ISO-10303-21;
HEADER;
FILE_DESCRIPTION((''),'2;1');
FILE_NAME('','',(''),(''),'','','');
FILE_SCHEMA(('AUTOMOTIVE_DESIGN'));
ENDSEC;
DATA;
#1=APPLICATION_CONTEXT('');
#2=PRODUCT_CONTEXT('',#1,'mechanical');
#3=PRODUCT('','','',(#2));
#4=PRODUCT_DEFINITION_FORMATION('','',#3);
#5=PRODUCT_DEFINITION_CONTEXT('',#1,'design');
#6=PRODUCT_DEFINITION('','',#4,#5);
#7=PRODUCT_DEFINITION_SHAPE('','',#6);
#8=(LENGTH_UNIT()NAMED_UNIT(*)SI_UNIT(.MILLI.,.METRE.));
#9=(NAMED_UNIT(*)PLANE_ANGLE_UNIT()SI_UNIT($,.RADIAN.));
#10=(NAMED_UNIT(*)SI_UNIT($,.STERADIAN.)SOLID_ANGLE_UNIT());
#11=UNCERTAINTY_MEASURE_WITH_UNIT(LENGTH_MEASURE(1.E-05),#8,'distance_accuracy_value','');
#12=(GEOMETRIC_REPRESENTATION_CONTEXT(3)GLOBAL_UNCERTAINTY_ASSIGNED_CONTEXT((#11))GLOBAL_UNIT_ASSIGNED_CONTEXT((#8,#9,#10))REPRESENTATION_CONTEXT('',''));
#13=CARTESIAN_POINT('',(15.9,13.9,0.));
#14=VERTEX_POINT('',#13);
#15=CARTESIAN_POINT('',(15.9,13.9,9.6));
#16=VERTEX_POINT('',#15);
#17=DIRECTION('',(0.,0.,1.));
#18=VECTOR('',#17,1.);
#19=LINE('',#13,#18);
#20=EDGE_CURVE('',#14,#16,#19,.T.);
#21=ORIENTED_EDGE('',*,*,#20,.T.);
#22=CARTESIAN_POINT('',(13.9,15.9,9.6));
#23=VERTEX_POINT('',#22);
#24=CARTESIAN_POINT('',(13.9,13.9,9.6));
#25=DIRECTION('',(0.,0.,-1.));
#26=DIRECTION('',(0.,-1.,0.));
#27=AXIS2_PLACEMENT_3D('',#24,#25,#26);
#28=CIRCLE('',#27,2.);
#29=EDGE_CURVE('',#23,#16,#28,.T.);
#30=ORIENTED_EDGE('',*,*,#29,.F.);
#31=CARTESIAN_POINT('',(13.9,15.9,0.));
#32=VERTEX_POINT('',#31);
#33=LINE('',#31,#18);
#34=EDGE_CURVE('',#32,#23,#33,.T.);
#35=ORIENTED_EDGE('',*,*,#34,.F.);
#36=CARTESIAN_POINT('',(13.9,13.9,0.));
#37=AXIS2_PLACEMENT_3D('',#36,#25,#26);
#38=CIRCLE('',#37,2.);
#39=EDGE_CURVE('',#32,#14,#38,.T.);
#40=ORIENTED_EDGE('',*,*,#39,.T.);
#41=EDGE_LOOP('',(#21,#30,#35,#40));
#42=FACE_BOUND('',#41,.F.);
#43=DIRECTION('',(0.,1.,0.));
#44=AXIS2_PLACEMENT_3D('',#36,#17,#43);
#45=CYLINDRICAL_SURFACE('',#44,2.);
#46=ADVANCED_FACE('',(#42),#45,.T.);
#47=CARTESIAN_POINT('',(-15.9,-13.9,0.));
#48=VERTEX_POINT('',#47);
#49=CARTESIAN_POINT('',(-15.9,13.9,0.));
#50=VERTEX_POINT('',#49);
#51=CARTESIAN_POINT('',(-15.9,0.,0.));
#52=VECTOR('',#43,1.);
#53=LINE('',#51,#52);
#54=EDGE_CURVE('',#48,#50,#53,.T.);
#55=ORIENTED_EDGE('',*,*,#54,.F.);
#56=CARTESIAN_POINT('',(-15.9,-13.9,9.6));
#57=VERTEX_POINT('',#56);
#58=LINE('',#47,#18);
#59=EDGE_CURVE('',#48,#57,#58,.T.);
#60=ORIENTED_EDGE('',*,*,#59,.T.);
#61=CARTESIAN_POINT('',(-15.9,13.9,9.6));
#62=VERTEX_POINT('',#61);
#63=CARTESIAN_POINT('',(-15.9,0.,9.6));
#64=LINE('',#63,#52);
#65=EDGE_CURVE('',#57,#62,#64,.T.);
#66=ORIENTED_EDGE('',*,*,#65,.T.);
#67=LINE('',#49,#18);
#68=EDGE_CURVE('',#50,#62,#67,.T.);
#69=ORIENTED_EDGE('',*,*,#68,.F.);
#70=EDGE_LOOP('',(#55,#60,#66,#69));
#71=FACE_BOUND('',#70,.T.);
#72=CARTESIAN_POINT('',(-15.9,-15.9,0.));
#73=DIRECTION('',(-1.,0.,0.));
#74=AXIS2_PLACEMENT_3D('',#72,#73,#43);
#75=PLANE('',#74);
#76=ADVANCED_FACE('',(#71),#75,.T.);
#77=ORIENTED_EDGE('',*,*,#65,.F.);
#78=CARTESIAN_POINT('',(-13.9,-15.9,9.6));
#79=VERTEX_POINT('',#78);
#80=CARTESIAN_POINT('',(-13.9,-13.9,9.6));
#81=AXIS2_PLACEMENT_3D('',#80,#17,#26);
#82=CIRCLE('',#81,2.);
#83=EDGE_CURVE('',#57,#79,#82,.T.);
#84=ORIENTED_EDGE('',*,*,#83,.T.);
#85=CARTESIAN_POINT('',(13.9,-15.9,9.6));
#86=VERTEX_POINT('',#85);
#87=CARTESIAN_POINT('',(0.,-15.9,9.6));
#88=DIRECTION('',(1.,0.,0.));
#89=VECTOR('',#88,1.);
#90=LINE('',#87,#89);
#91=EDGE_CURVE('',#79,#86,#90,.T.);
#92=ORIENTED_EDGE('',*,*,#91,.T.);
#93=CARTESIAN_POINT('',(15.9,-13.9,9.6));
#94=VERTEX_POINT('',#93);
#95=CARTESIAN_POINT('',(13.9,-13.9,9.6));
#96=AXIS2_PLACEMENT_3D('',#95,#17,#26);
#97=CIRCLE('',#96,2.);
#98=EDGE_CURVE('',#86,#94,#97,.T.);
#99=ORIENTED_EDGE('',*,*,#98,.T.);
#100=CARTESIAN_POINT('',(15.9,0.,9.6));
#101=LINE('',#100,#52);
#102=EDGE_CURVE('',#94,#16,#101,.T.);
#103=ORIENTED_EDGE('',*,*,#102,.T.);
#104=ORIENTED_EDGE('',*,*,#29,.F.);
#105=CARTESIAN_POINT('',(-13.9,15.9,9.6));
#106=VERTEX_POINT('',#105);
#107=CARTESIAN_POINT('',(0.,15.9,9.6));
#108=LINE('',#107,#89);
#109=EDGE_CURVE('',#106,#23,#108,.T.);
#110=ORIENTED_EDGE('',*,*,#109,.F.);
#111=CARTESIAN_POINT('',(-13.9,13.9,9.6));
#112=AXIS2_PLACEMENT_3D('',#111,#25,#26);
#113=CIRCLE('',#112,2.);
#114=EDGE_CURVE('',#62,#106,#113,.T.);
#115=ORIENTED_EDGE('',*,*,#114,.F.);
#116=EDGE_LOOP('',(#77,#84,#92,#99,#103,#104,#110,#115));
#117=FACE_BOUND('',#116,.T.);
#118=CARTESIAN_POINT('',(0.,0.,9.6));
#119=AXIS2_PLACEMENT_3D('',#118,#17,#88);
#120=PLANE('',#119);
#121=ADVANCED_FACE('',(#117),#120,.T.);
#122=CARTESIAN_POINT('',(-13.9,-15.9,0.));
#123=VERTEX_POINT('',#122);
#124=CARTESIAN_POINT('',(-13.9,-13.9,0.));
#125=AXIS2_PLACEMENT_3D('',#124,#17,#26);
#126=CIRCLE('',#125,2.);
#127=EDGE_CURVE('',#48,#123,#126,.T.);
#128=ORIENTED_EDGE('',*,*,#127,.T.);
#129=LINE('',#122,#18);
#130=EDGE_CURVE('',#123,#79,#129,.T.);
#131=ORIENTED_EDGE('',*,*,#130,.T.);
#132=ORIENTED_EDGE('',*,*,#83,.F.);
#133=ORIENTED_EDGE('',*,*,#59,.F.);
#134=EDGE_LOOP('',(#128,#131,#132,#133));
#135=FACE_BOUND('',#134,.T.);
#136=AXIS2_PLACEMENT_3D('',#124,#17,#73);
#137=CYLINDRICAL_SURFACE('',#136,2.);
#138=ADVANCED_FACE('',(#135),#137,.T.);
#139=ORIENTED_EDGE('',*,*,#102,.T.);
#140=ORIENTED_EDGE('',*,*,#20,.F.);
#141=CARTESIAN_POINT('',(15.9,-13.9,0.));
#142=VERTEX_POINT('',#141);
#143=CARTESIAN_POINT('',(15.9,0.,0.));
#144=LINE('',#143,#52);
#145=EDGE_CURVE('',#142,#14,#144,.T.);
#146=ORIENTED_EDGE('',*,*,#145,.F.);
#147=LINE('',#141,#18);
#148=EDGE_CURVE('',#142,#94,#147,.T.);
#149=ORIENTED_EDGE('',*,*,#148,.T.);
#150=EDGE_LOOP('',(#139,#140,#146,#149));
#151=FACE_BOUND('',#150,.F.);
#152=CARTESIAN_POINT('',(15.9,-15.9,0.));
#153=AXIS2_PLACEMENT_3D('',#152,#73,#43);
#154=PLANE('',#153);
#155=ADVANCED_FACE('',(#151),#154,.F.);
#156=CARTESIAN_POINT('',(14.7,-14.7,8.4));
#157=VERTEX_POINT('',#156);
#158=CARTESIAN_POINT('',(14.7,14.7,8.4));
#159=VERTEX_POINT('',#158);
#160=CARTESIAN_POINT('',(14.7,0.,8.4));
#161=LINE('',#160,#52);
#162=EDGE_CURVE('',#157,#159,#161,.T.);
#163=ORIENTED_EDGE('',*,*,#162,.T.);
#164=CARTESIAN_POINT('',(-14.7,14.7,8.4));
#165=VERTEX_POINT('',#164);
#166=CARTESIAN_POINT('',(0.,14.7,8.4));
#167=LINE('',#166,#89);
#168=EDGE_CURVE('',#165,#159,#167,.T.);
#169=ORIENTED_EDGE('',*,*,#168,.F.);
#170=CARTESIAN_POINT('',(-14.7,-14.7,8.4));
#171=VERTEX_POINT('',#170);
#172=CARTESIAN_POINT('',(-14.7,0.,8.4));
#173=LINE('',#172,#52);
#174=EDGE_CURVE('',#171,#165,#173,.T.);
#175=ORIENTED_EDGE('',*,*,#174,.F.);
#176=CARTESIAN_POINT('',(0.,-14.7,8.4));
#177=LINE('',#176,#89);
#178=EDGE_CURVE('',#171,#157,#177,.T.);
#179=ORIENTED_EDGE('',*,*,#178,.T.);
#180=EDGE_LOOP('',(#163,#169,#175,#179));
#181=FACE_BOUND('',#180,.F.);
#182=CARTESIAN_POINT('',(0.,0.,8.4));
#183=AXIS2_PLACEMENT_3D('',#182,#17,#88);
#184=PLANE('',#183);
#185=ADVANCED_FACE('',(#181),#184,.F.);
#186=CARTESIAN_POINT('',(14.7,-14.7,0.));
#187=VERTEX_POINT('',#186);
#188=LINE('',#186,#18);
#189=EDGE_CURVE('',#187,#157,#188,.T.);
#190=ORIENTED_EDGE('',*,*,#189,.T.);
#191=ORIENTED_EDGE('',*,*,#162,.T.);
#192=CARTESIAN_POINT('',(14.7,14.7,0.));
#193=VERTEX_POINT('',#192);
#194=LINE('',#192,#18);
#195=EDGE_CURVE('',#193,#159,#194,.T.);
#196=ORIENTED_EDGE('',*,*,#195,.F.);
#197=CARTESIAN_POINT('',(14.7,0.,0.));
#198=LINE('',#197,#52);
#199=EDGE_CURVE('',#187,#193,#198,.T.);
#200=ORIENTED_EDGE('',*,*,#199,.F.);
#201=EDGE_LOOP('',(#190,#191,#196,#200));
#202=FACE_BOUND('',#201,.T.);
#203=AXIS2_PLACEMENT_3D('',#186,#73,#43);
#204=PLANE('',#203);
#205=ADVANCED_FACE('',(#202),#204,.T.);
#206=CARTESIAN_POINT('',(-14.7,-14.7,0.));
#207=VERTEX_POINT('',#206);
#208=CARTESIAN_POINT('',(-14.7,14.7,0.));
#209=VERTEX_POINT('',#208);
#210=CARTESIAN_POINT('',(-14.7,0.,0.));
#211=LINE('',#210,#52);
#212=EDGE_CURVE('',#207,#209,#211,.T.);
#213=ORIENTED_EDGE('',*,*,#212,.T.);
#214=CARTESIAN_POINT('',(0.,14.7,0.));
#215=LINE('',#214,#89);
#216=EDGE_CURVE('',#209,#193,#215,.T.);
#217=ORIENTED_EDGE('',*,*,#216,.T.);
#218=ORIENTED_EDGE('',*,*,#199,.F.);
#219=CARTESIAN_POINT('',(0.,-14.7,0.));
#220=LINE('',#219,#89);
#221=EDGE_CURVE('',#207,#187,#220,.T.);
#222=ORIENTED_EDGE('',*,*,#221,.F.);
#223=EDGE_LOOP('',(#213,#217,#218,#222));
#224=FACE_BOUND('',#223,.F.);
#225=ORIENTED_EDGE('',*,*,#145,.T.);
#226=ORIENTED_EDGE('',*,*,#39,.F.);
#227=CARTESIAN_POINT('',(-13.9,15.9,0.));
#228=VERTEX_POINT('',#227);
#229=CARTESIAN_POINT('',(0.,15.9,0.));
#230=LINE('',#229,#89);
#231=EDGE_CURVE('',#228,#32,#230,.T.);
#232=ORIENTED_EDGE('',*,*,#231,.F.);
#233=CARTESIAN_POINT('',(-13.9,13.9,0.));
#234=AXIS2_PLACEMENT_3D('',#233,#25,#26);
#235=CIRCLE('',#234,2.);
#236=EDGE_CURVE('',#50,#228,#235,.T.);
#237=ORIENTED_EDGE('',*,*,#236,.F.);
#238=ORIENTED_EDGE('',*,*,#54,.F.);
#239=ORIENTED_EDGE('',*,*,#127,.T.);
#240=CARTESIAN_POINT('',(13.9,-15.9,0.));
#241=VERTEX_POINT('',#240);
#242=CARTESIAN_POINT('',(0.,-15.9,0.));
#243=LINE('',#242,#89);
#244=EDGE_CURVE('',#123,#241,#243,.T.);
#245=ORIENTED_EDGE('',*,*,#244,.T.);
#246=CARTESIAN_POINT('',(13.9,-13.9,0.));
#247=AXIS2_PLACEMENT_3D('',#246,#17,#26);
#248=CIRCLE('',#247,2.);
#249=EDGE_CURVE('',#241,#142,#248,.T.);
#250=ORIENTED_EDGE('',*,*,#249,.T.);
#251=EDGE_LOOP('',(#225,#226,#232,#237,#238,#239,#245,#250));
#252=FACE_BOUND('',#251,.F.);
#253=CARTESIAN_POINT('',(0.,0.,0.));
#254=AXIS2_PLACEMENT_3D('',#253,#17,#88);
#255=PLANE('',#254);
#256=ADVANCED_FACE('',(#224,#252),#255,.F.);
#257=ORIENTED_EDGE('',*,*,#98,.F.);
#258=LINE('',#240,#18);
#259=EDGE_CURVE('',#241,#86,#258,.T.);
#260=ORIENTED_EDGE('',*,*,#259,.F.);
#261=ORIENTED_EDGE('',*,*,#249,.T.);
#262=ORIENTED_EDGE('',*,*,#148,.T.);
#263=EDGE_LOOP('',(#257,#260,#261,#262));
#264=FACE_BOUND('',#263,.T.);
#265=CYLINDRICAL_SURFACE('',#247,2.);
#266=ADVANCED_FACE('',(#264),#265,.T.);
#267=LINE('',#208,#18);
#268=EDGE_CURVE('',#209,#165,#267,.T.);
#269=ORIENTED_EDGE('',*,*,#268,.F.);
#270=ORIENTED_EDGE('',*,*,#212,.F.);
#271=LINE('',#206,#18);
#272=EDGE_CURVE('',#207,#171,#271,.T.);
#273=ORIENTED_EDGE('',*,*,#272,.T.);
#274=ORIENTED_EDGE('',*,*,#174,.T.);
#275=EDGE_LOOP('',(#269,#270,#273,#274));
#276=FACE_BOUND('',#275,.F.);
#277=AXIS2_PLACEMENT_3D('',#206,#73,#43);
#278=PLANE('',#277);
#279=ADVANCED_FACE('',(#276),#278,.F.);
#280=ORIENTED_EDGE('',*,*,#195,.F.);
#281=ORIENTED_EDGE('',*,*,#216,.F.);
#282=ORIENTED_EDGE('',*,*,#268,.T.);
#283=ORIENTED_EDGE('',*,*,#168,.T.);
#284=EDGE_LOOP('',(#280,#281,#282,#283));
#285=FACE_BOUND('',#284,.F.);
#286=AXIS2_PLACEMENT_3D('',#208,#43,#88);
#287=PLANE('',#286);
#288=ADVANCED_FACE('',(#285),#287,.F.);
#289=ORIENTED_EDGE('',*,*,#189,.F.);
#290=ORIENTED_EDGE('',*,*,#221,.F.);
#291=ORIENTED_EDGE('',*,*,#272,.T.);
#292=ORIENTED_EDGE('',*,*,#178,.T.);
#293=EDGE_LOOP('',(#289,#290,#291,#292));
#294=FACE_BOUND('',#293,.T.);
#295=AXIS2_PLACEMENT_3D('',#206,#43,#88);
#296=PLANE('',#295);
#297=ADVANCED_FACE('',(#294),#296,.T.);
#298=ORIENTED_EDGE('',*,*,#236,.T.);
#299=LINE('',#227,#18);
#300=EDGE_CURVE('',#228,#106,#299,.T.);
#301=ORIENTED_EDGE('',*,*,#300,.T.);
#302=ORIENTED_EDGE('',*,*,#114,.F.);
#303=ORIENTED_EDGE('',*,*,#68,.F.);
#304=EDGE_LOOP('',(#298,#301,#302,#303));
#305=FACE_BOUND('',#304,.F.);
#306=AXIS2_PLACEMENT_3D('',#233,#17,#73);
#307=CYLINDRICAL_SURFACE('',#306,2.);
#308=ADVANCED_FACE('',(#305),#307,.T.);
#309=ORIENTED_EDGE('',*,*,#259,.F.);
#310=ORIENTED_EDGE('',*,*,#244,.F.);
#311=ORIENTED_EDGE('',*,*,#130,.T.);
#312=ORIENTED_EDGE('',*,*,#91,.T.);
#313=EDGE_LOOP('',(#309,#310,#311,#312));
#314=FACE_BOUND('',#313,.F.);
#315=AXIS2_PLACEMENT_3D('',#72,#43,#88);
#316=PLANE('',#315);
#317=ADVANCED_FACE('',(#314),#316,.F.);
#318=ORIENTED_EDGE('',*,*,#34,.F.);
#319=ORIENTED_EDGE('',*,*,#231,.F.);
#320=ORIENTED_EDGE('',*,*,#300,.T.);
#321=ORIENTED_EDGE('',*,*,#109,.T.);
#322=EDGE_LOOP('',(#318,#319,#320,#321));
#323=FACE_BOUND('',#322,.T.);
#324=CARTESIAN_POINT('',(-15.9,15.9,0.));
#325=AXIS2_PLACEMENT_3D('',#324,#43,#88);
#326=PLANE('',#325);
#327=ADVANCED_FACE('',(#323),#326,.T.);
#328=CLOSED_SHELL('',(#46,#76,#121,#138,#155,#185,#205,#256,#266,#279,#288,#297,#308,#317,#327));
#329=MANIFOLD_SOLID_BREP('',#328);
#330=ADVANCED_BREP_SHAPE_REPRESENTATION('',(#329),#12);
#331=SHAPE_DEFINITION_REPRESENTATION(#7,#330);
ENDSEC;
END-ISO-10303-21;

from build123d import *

# Parameters (mm, degrees)
F0_W     = 31.8
F0_H     = 31.8
F1_DEPTH = 9.6
F2_W     = 29.4
F2_H     = 29.4
F3_DEPTH = 8.4
F4_R     = 2


# Not quite as in the source:
# - a feature names something its author has since deleted; it is built from what else it names


with BuildPart() as f1:
    # F0 (on Top) → F1 (new body)
    with BuildSketch(Plane.XY):
        Rectangle(F0_W, F0_H)
    extrude(amount=F1_DEPTH)

    # F2 (on Top) → F3 (cut)
    with BuildSketch(Plane.XY):
        Rectangle(F2_W, F2_H)
    extrude(amount=F3_DEPTH, mode=Mode.SUBTRACT)

    # F4
    f4_edges = [f1.edges().sort_by_distance(p)[0] for p in [
        (-15.9, -15.9, 4.8),
        (-15.9, 15.9, 4.8),
        (15.9, 15.9, 4.8),
        (15.9, -15.9, 4.8),
    ]]
    fillet(f4_edges, radius=F4_R)


solid = f1.part
